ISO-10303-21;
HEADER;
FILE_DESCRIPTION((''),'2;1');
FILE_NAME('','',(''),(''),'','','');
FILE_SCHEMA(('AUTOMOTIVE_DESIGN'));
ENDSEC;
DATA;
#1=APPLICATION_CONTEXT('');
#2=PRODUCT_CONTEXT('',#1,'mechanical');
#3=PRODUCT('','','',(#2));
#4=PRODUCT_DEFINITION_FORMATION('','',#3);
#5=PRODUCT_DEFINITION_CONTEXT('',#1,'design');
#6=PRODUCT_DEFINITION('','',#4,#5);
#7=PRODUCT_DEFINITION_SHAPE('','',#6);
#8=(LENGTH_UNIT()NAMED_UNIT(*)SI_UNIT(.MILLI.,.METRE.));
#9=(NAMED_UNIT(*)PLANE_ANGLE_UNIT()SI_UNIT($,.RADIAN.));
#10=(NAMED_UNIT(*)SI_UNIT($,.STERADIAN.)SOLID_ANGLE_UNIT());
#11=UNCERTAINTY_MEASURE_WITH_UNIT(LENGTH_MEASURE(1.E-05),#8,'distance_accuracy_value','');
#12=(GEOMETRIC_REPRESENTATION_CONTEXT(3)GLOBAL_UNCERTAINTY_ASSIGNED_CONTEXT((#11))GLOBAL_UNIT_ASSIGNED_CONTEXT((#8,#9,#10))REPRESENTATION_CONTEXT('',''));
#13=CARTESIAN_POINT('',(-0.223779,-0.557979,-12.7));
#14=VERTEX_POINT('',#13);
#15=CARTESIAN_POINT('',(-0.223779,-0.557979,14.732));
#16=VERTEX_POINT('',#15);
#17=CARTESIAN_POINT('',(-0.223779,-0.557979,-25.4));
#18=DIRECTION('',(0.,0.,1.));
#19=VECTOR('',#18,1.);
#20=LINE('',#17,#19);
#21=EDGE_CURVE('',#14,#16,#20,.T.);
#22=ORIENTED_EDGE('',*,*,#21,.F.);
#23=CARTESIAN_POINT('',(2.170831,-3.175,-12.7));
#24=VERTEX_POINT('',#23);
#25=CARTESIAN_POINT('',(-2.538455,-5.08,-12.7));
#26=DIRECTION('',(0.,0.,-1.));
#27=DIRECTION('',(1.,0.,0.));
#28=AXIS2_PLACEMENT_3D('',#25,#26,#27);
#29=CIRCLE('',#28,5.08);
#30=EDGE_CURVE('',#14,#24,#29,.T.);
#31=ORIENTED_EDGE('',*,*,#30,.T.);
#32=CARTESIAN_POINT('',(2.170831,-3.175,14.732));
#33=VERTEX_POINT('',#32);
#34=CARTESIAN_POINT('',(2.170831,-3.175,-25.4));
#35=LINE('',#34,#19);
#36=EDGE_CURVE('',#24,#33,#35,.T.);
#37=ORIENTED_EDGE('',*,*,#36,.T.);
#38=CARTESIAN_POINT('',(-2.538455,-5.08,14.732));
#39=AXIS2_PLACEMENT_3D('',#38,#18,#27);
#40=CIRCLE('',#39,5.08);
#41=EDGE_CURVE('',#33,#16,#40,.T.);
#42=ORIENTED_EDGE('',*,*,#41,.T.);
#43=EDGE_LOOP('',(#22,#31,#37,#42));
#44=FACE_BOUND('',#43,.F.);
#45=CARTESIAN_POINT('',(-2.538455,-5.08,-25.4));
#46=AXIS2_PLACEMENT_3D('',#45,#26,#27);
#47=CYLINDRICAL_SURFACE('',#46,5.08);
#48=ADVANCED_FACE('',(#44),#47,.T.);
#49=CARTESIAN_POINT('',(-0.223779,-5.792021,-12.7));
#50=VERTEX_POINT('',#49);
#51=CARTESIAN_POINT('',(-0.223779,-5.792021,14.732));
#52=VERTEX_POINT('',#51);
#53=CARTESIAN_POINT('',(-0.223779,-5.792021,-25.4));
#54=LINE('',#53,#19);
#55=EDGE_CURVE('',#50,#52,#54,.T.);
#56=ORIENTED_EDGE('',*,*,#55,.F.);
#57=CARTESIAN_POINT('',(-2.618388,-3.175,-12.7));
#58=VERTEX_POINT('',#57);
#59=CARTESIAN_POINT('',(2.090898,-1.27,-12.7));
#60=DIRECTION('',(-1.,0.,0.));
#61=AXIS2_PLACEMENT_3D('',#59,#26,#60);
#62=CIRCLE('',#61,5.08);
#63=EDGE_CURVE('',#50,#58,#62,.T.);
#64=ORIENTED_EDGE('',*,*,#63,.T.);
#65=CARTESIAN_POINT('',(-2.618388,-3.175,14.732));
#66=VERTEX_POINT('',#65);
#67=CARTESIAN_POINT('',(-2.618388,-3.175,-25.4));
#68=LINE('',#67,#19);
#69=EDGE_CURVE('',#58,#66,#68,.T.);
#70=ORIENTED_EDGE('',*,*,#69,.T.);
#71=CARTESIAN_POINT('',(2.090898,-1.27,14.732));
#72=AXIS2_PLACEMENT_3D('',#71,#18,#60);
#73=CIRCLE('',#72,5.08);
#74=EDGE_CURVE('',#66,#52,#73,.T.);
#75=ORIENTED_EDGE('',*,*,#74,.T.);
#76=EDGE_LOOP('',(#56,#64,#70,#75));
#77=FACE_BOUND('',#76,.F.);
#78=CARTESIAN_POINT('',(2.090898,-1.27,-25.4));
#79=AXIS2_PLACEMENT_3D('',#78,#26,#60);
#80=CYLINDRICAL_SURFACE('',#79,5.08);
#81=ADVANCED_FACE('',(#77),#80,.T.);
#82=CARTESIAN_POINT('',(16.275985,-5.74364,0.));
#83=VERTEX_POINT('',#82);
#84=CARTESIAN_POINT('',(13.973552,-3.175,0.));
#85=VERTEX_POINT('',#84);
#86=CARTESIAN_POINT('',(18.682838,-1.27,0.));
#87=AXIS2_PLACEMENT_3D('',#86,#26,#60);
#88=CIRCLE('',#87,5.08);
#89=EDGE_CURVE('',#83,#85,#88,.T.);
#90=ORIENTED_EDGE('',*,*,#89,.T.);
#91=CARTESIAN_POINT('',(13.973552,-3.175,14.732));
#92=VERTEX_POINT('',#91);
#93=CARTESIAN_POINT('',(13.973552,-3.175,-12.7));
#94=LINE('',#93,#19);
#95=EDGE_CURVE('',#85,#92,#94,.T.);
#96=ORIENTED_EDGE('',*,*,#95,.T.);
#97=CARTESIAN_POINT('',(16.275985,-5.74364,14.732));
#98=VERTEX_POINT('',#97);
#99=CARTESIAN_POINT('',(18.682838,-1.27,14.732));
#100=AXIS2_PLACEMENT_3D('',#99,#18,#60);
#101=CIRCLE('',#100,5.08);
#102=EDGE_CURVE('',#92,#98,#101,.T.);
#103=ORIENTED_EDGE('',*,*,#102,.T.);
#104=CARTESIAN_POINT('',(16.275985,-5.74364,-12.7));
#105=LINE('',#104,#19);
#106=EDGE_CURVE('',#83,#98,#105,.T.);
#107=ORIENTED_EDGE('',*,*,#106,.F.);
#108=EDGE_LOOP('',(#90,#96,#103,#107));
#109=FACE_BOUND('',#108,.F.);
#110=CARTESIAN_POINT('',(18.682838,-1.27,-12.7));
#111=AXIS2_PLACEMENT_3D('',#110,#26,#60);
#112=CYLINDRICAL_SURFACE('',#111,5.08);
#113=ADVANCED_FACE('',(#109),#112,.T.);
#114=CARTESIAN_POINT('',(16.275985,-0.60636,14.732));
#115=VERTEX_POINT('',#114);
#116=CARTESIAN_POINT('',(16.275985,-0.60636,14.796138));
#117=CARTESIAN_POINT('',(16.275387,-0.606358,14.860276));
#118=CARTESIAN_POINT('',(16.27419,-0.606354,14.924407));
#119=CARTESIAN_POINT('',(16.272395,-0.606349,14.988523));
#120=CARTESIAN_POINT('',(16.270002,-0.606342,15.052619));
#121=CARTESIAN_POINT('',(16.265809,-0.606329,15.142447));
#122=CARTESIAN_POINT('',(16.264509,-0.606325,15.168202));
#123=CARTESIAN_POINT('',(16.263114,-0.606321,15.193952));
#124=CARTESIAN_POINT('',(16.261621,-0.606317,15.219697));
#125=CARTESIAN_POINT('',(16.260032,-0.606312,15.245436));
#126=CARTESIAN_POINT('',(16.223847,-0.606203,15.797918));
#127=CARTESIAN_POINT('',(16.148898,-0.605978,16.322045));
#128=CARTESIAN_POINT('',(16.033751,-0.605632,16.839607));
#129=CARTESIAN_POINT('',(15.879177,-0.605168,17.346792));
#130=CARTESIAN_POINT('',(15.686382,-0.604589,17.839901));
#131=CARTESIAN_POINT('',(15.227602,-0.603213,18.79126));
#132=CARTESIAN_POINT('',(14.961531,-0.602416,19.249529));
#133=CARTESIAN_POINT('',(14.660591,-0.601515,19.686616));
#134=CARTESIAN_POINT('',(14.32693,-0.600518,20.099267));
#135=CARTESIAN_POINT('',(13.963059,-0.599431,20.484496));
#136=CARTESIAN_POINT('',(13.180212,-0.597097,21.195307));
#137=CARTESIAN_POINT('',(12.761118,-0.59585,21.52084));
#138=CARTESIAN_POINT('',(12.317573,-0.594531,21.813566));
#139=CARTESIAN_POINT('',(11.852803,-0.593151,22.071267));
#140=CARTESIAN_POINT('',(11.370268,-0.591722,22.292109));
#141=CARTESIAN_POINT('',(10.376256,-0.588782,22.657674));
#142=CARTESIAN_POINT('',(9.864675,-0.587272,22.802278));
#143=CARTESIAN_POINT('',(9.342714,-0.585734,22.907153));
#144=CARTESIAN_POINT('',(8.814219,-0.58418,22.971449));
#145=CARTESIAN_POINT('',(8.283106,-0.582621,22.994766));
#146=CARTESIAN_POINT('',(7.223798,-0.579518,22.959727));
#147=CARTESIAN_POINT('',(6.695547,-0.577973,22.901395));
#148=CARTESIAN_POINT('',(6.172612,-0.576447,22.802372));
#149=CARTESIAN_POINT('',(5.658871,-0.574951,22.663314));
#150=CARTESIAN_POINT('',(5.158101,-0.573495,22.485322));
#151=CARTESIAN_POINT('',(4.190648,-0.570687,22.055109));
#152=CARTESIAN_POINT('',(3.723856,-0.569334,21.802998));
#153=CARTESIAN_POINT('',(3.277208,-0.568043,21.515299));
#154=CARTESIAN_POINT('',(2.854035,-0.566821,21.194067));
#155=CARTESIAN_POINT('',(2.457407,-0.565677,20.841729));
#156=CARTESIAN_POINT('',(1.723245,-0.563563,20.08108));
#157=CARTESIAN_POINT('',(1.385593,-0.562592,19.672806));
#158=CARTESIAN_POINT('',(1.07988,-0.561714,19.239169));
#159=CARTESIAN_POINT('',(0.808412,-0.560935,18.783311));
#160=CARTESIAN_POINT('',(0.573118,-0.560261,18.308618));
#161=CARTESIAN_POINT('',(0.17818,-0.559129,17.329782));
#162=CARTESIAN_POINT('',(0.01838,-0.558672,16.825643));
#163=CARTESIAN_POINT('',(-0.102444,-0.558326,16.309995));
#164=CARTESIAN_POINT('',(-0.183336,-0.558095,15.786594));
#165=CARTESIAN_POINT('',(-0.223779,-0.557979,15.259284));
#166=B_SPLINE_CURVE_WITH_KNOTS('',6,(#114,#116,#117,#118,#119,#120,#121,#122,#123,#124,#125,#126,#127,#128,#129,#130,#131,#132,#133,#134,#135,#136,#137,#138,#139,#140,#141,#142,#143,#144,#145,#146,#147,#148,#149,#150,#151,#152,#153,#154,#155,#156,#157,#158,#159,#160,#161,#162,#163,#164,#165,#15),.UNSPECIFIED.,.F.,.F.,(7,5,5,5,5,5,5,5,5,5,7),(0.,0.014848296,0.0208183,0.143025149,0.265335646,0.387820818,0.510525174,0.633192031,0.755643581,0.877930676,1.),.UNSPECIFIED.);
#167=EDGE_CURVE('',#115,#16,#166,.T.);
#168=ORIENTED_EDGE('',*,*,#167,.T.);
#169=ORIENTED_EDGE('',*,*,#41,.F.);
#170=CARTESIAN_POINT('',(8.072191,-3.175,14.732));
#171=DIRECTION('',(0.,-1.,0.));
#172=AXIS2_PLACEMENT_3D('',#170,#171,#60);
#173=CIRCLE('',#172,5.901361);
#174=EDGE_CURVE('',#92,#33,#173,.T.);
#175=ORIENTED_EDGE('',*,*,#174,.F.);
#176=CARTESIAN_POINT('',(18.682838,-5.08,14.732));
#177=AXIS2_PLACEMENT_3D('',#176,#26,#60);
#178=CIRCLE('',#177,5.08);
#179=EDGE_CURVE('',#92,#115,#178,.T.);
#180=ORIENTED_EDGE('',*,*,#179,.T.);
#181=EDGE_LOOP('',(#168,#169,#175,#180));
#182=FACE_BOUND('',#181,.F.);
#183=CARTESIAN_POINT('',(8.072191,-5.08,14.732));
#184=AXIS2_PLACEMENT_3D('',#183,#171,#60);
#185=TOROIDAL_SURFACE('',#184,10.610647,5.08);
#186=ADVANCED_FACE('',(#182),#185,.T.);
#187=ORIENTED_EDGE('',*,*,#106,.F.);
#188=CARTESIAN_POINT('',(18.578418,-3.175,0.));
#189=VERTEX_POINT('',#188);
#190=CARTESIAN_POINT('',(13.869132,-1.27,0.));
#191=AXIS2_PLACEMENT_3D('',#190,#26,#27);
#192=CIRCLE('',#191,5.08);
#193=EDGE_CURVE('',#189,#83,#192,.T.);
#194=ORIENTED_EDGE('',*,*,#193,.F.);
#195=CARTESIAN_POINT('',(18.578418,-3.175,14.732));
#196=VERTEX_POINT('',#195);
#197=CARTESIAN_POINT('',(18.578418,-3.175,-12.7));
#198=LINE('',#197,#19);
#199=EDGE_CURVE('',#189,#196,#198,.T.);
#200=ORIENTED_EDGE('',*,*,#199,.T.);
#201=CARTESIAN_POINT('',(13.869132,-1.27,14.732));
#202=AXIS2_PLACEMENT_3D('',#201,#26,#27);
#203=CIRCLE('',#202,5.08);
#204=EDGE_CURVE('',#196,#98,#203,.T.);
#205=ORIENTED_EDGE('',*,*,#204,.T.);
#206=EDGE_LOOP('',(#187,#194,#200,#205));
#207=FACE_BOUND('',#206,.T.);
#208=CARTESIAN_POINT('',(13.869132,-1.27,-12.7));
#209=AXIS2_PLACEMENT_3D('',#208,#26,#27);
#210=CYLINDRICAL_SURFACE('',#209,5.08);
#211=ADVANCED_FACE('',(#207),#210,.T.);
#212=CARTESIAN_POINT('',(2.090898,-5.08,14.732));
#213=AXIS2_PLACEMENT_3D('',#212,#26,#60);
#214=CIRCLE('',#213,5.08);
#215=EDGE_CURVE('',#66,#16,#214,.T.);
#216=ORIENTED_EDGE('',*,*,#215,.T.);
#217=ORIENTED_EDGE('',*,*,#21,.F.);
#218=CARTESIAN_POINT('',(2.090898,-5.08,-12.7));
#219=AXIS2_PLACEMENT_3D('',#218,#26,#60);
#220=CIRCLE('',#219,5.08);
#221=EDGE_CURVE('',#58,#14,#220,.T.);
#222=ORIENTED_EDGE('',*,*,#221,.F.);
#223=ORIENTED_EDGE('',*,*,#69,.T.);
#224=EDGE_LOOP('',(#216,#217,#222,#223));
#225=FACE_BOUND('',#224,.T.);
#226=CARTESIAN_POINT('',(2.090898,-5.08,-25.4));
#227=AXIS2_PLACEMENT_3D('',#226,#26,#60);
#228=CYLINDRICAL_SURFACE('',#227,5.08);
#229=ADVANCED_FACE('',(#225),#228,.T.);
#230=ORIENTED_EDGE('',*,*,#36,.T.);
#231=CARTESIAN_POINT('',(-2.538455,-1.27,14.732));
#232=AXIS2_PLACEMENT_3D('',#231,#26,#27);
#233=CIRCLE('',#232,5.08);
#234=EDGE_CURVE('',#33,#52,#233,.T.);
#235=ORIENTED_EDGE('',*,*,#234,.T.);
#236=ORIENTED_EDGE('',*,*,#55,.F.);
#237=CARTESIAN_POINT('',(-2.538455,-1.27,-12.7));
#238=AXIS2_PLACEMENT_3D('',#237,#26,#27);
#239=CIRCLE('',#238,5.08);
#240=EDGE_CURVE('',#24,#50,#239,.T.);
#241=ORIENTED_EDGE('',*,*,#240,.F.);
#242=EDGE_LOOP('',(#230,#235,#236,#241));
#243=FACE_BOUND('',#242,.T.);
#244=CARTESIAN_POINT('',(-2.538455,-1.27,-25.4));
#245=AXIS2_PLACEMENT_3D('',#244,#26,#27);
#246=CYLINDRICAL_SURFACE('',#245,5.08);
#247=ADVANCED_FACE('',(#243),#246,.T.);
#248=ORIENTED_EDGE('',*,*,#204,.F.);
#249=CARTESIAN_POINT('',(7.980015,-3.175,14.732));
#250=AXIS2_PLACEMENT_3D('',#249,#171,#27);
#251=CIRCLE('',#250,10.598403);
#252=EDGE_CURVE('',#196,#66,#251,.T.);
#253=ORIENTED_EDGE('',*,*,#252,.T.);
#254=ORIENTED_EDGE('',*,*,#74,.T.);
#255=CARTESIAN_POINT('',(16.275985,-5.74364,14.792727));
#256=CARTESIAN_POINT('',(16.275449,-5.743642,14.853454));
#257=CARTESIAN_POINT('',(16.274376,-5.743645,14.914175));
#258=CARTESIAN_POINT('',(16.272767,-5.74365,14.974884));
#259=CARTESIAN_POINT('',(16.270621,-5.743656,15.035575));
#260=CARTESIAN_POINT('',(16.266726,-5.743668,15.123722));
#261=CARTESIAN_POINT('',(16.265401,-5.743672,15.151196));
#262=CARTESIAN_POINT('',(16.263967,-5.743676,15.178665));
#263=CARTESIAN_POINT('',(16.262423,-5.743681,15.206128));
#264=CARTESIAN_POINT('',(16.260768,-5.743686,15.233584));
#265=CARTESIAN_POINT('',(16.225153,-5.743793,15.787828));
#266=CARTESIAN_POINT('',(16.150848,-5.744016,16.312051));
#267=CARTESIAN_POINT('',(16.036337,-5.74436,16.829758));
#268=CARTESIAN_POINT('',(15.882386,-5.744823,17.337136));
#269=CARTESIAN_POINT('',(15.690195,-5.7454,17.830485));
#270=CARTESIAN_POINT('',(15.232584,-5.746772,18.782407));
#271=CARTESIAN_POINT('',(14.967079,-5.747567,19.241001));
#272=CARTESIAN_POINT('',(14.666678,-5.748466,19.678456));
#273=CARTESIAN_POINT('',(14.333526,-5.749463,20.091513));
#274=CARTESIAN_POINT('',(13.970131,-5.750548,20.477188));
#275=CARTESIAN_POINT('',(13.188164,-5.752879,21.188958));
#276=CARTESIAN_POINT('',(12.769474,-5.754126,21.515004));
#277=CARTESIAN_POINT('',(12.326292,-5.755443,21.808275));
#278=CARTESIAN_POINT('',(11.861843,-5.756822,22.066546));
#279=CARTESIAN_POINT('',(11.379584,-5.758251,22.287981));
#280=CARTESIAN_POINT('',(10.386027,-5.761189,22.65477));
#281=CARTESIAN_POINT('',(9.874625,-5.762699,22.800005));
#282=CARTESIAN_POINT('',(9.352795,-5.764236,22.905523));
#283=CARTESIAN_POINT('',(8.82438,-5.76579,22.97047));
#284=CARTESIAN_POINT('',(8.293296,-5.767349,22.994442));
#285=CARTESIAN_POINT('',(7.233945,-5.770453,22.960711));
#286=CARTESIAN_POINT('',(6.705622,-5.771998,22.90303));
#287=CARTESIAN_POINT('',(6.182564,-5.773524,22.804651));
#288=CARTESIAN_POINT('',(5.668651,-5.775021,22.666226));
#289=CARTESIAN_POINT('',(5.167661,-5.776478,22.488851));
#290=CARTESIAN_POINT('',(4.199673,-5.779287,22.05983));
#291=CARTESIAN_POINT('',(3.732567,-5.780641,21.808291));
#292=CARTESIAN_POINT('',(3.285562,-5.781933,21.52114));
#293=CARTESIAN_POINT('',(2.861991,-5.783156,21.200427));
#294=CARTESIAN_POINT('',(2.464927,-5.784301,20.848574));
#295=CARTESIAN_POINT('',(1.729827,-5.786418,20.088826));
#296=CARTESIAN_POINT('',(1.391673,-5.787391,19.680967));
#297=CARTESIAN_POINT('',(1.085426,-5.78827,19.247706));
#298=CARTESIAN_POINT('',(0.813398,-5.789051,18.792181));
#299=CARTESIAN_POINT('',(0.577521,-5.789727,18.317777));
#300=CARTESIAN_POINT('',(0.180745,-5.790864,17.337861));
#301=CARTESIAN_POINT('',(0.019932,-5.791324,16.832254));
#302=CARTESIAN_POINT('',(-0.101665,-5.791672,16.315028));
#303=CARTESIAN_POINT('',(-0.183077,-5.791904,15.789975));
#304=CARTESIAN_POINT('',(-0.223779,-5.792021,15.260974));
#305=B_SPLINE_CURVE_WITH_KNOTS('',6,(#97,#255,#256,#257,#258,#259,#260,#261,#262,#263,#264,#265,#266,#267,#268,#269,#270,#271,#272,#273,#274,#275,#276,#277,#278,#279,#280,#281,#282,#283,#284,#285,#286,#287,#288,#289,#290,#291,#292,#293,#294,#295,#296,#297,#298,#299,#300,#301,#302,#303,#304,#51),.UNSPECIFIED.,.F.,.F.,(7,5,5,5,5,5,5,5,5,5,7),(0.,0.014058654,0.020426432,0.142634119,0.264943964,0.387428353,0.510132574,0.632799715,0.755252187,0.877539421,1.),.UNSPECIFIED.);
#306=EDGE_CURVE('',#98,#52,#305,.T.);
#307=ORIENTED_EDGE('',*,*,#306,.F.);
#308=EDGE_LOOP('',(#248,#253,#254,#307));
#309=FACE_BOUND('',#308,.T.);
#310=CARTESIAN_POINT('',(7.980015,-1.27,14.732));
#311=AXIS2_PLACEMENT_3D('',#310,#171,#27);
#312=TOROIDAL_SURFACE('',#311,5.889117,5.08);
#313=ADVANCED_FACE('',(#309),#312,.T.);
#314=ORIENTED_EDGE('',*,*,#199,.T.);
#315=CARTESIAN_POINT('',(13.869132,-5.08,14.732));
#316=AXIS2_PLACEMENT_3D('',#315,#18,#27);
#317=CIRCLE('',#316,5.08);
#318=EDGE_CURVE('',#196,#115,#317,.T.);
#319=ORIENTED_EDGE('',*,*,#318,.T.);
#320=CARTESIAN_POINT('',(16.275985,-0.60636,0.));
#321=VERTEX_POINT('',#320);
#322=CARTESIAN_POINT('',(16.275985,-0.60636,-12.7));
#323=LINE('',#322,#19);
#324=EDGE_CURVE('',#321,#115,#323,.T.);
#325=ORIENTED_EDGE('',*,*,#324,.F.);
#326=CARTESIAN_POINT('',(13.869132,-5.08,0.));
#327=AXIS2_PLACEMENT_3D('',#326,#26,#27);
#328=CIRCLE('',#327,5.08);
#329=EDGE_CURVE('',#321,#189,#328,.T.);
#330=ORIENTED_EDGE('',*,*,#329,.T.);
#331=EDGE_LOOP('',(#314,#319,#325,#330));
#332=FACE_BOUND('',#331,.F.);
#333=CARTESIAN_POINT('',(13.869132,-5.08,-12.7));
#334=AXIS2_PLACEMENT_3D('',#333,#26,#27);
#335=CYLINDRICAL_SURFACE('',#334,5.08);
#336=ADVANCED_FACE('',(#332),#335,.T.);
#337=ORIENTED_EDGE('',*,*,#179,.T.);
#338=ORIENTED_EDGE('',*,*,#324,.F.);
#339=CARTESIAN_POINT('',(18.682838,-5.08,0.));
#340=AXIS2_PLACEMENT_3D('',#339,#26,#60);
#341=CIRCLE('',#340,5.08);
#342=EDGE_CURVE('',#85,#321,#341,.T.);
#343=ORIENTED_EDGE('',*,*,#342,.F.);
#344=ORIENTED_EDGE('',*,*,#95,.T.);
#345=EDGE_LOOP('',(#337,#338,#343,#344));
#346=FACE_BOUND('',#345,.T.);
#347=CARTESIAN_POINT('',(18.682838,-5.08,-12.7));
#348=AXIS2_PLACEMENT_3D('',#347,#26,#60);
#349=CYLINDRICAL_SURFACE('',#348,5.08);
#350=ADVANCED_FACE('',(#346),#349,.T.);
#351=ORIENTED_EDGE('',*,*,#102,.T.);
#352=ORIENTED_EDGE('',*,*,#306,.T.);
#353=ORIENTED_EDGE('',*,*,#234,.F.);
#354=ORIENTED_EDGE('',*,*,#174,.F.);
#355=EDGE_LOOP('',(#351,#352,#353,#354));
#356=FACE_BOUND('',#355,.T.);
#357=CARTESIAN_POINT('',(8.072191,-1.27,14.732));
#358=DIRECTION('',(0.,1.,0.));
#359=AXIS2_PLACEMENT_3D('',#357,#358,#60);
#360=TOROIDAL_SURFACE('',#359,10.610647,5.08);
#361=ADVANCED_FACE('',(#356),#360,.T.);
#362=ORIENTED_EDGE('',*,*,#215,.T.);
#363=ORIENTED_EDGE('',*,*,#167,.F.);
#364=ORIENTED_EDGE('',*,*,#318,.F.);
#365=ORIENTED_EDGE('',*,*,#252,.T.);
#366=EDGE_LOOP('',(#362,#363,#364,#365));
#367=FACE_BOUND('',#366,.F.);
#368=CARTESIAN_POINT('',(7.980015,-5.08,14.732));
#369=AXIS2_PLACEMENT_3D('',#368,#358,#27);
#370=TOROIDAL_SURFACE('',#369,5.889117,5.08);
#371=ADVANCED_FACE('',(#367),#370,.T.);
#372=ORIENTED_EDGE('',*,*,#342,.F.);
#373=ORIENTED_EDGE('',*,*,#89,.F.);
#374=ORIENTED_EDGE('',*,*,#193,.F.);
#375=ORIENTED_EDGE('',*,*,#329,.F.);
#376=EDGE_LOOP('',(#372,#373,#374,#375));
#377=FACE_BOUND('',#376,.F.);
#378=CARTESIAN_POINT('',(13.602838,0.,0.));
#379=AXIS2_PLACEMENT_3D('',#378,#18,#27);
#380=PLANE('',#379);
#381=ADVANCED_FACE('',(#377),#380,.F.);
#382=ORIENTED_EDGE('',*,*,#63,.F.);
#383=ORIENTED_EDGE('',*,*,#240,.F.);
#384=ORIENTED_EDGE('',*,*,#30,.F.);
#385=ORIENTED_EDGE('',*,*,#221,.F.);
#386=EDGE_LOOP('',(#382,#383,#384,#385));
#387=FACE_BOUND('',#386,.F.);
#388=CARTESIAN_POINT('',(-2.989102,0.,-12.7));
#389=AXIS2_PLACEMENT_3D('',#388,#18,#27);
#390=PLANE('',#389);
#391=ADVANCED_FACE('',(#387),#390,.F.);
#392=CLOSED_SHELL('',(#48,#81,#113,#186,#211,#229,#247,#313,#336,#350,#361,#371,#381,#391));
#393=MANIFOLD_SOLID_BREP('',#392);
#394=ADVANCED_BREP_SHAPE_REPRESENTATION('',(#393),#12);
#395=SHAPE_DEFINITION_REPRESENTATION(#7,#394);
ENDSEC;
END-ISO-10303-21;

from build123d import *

# Parameters (mm, degrees)
F0_W         = 5.3462936
F0_H         = 14.732
F0_W_2       = 5.5306468
F0_H_2       = 12.7
F1_DEPTH     = 6.35
F2_T1_DEPTH  = 27.432
F2_T3_DEPTH  = 40.132
F2_T6_ANGLE  = 180
F2_T8_ANGLE  = 180
F2_T10_ANGLE = 180
F2_T12_ANGLE = 180


# Not quite as in the source:
# - a fillet or chamfer that OpenCascade refuses, or shapes differently, is made with other operations: its cross-section is extruded or revolved along the edge and cut away or added


with BuildPart() as f1:
    # F0 (on Front) → F1 (new body)
    with BuildSketch(Plane.XZ):
        with BuildLine():
            Line((-2.9891021488, 14.732), (-2.9891021488, 0))
            Line((-2.9891021488, 0), (2.5415446512, 0))
            Line((2.5415446512, 0), (2.5415446512, 14.732))
            ThreePointArc((2.5415446512, 14.732), (8.0721914512, 20.2626468), (13.6028382512, 14.732))
            Line((13.6028382512, 14.732), (18.9491318512, 14.732))
            ThreePointArc((18.9491318512, 14.732), (7.9800148512, 25.701117), (-2.9891021488, 14.732))
        make_face()
        with Locations((16.2759850512, 7.366)):
            Rectangle(F0_W, F0_H)
        with Locations((-0.2237787488, -6.35)):
            Rectangle(F0_W_2, F0_H_2)
    extrude(amount=F1_DEPTH)

    # F2: fillet of radius 5.08 on 4 edges, made by hand

    # F2_s2 → F2_t1 (cut)
    with BuildSketch(Plane.XY.offset(-12.7)):
        with BuildLine():
            ThreePointArc((18.9491318512, -5.08), (17.4612342996, -1.4878975516), (13.8691318512, 0))
            Line((13.8691318512, 0), (18.9491318512, 0))
            Line((18.9491318512, 0), (18.9491318512, -5.08))
        make_face()
        with BuildLine():
            ThreePointArc((13.6028382512, -5.08), (15.0907358028, -1.4878975516), (18.6828382512, 0))
            Line((18.6828382512, 0), (13.6028382512, 0))
            Line((13.6028382512, 0), (13.6028382512, -5.08))
        make_face()
        with BuildLine():
            ThreePointArc((13.6028382512, -1.27), (15.0907358028, -4.8621024484), (18.6828382512, -6.35))
            Line((18.6828382512, -6.35), (13.6028382512, -6.35))
            Line((13.6028382512, -6.35), (13.6028382512, -1.27))
        make_face()
        with BuildLine():
            ThreePointArc((18.9491318512, -1.27), (17.4612342996, -4.8621024484), (13.8691318512, -6.35))
            Line((13.8691318512, -6.35), (18.9491318512, -6.35))
            Line((18.9491318512, -6.35), (18.9491318512, -1.27))
        make_face()
    extrude(amount=F2_T1_DEPTH, mode=Mode.SUBTRACT)

    # F2_s4 → F2_t3 (cut)
    with BuildSketch(Plane.XY.offset(-25.4)):
        with BuildLine():
            ThreePointArc((2.5415446512, -1.27), (1.0536470996, -4.8621024484), (-2.5384553488, -6.35))
            Line((-2.5384553488, -6.35), (2.5415446512, -6.35))
            Line((2.5415446512, -6.35), (2.5415446512, -1.27))
        make_face()
        with BuildLine():
            ThreePointArc((2.5415446512, -5.08), (1.0536470996, -1.4878975516), (-2.5384553488, 0))
            Line((-2.5384553488, 0), (2.5415446512, 0))
            Line((2.5415446512, 0), (2.5415446512, -5.08))
        make_face()
        with BuildLine():
            ThreePointArc((-2.9891021488, -5.08), (-1.5012045972, -1.4878975516), (2.0908978512, 0))
            Line((2.0908978512, 0), (-2.9891021488, 0))
            Line((-2.9891021488, 0), (-2.9891021488, -5.08))
        make_face()
        with BuildLine():
            ThreePointArc((-2.9891021488, -1.27), (-1.5012045972, -4.8621024484), (2.0908978512, -6.35))
            Line((2.0908978512, -6.35), (-2.9891021488, -6.35))
            Line((-2.9891021488, -6.35), (-2.9891021488, -1.27))
        make_face()
    extrude(amount=F2_T3_DEPTH, mode=Mode.SUBTRACT)

    # F2_s5 → F2_t6 (revolve, cut)
    with BuildSketch(Plane.XY.offset(14.732)):
        with BuildLine():
            ThreePointArc((18.9491318512, -1.27), (17.4612342996, -4.8621024484), (13.8691318512, -6.35))
            Line((13.8691318512, -6.35), (18.9491318512, -6.35))
            Line((18.9491318512, -6.35), (18.9491318512, -1.27))
        make_face()
    revolve(axis=Axis((7.9800148512, -6.35, 14.732), (0, -1, 0)), revolution_arc=F2_T6_ANGLE, mode=Mode.SUBTRACT)

    # F2_s7 → F2_t8 (revolve, cut)
    with BuildSketch(Plane.XY.offset(14.732)):
        with BuildLine():
            ThreePointArc((2.5415446512, -5.08), (1.0536470996, -1.4878975516), (-2.5384553488, 0))
            Line((-2.5384553488, 0), (2.5415446512, 0))
            Line((2.5415446512, 0), (2.5415446512, -5.08))
        make_face()
    revolve(axis=Axis((8.0721914512, 0, 14.732), (0, 1, 0)), revolution_arc=F2_T8_ANGLE, mode=Mode.SUBTRACT)

    # F2_s9 → F2_t10 (revolve, cut)
    with BuildSketch(Plane.XY.offset(14.732)):
        with BuildLine():
            ThreePointArc((2.5415446512, -1.27), (1.0536470996, -4.8621024484), (-2.5384553488, -6.35))
            Line((-2.5384553488, -6.35), (2.5415446512, -6.35))
            Line((2.5415446512, -6.35), (2.5415446512, -1.27))
        make_face()
    revolve(axis=Axis((8.0721914512, -6.35, 14.732), (0, 1, 0)), revolution_arc=F2_T10_ANGLE, mode=Mode.SUBTRACT)

    # F2_s11 → F2_t12 (revolve, cut)
    with BuildSketch(Plane.XY.offset(14.732)):
        with BuildLine():
            ThreePointArc((18.9491318512, -5.08), (17.4612342996, -1.4878975516), (13.8691318512, 0))
            Line((13.8691318512, 0), (18.9491318512, 0))
            Line((18.9491318512, 0), (18.9491318512, -5.08))
        make_face()
    revolve(axis=Axis((7.9800148512, 0, 14.732), (0, -1, 0)), revolution_arc=F2_T12_ANGLE, mode=Mode.SUBTRACT)


solid = f1.part
